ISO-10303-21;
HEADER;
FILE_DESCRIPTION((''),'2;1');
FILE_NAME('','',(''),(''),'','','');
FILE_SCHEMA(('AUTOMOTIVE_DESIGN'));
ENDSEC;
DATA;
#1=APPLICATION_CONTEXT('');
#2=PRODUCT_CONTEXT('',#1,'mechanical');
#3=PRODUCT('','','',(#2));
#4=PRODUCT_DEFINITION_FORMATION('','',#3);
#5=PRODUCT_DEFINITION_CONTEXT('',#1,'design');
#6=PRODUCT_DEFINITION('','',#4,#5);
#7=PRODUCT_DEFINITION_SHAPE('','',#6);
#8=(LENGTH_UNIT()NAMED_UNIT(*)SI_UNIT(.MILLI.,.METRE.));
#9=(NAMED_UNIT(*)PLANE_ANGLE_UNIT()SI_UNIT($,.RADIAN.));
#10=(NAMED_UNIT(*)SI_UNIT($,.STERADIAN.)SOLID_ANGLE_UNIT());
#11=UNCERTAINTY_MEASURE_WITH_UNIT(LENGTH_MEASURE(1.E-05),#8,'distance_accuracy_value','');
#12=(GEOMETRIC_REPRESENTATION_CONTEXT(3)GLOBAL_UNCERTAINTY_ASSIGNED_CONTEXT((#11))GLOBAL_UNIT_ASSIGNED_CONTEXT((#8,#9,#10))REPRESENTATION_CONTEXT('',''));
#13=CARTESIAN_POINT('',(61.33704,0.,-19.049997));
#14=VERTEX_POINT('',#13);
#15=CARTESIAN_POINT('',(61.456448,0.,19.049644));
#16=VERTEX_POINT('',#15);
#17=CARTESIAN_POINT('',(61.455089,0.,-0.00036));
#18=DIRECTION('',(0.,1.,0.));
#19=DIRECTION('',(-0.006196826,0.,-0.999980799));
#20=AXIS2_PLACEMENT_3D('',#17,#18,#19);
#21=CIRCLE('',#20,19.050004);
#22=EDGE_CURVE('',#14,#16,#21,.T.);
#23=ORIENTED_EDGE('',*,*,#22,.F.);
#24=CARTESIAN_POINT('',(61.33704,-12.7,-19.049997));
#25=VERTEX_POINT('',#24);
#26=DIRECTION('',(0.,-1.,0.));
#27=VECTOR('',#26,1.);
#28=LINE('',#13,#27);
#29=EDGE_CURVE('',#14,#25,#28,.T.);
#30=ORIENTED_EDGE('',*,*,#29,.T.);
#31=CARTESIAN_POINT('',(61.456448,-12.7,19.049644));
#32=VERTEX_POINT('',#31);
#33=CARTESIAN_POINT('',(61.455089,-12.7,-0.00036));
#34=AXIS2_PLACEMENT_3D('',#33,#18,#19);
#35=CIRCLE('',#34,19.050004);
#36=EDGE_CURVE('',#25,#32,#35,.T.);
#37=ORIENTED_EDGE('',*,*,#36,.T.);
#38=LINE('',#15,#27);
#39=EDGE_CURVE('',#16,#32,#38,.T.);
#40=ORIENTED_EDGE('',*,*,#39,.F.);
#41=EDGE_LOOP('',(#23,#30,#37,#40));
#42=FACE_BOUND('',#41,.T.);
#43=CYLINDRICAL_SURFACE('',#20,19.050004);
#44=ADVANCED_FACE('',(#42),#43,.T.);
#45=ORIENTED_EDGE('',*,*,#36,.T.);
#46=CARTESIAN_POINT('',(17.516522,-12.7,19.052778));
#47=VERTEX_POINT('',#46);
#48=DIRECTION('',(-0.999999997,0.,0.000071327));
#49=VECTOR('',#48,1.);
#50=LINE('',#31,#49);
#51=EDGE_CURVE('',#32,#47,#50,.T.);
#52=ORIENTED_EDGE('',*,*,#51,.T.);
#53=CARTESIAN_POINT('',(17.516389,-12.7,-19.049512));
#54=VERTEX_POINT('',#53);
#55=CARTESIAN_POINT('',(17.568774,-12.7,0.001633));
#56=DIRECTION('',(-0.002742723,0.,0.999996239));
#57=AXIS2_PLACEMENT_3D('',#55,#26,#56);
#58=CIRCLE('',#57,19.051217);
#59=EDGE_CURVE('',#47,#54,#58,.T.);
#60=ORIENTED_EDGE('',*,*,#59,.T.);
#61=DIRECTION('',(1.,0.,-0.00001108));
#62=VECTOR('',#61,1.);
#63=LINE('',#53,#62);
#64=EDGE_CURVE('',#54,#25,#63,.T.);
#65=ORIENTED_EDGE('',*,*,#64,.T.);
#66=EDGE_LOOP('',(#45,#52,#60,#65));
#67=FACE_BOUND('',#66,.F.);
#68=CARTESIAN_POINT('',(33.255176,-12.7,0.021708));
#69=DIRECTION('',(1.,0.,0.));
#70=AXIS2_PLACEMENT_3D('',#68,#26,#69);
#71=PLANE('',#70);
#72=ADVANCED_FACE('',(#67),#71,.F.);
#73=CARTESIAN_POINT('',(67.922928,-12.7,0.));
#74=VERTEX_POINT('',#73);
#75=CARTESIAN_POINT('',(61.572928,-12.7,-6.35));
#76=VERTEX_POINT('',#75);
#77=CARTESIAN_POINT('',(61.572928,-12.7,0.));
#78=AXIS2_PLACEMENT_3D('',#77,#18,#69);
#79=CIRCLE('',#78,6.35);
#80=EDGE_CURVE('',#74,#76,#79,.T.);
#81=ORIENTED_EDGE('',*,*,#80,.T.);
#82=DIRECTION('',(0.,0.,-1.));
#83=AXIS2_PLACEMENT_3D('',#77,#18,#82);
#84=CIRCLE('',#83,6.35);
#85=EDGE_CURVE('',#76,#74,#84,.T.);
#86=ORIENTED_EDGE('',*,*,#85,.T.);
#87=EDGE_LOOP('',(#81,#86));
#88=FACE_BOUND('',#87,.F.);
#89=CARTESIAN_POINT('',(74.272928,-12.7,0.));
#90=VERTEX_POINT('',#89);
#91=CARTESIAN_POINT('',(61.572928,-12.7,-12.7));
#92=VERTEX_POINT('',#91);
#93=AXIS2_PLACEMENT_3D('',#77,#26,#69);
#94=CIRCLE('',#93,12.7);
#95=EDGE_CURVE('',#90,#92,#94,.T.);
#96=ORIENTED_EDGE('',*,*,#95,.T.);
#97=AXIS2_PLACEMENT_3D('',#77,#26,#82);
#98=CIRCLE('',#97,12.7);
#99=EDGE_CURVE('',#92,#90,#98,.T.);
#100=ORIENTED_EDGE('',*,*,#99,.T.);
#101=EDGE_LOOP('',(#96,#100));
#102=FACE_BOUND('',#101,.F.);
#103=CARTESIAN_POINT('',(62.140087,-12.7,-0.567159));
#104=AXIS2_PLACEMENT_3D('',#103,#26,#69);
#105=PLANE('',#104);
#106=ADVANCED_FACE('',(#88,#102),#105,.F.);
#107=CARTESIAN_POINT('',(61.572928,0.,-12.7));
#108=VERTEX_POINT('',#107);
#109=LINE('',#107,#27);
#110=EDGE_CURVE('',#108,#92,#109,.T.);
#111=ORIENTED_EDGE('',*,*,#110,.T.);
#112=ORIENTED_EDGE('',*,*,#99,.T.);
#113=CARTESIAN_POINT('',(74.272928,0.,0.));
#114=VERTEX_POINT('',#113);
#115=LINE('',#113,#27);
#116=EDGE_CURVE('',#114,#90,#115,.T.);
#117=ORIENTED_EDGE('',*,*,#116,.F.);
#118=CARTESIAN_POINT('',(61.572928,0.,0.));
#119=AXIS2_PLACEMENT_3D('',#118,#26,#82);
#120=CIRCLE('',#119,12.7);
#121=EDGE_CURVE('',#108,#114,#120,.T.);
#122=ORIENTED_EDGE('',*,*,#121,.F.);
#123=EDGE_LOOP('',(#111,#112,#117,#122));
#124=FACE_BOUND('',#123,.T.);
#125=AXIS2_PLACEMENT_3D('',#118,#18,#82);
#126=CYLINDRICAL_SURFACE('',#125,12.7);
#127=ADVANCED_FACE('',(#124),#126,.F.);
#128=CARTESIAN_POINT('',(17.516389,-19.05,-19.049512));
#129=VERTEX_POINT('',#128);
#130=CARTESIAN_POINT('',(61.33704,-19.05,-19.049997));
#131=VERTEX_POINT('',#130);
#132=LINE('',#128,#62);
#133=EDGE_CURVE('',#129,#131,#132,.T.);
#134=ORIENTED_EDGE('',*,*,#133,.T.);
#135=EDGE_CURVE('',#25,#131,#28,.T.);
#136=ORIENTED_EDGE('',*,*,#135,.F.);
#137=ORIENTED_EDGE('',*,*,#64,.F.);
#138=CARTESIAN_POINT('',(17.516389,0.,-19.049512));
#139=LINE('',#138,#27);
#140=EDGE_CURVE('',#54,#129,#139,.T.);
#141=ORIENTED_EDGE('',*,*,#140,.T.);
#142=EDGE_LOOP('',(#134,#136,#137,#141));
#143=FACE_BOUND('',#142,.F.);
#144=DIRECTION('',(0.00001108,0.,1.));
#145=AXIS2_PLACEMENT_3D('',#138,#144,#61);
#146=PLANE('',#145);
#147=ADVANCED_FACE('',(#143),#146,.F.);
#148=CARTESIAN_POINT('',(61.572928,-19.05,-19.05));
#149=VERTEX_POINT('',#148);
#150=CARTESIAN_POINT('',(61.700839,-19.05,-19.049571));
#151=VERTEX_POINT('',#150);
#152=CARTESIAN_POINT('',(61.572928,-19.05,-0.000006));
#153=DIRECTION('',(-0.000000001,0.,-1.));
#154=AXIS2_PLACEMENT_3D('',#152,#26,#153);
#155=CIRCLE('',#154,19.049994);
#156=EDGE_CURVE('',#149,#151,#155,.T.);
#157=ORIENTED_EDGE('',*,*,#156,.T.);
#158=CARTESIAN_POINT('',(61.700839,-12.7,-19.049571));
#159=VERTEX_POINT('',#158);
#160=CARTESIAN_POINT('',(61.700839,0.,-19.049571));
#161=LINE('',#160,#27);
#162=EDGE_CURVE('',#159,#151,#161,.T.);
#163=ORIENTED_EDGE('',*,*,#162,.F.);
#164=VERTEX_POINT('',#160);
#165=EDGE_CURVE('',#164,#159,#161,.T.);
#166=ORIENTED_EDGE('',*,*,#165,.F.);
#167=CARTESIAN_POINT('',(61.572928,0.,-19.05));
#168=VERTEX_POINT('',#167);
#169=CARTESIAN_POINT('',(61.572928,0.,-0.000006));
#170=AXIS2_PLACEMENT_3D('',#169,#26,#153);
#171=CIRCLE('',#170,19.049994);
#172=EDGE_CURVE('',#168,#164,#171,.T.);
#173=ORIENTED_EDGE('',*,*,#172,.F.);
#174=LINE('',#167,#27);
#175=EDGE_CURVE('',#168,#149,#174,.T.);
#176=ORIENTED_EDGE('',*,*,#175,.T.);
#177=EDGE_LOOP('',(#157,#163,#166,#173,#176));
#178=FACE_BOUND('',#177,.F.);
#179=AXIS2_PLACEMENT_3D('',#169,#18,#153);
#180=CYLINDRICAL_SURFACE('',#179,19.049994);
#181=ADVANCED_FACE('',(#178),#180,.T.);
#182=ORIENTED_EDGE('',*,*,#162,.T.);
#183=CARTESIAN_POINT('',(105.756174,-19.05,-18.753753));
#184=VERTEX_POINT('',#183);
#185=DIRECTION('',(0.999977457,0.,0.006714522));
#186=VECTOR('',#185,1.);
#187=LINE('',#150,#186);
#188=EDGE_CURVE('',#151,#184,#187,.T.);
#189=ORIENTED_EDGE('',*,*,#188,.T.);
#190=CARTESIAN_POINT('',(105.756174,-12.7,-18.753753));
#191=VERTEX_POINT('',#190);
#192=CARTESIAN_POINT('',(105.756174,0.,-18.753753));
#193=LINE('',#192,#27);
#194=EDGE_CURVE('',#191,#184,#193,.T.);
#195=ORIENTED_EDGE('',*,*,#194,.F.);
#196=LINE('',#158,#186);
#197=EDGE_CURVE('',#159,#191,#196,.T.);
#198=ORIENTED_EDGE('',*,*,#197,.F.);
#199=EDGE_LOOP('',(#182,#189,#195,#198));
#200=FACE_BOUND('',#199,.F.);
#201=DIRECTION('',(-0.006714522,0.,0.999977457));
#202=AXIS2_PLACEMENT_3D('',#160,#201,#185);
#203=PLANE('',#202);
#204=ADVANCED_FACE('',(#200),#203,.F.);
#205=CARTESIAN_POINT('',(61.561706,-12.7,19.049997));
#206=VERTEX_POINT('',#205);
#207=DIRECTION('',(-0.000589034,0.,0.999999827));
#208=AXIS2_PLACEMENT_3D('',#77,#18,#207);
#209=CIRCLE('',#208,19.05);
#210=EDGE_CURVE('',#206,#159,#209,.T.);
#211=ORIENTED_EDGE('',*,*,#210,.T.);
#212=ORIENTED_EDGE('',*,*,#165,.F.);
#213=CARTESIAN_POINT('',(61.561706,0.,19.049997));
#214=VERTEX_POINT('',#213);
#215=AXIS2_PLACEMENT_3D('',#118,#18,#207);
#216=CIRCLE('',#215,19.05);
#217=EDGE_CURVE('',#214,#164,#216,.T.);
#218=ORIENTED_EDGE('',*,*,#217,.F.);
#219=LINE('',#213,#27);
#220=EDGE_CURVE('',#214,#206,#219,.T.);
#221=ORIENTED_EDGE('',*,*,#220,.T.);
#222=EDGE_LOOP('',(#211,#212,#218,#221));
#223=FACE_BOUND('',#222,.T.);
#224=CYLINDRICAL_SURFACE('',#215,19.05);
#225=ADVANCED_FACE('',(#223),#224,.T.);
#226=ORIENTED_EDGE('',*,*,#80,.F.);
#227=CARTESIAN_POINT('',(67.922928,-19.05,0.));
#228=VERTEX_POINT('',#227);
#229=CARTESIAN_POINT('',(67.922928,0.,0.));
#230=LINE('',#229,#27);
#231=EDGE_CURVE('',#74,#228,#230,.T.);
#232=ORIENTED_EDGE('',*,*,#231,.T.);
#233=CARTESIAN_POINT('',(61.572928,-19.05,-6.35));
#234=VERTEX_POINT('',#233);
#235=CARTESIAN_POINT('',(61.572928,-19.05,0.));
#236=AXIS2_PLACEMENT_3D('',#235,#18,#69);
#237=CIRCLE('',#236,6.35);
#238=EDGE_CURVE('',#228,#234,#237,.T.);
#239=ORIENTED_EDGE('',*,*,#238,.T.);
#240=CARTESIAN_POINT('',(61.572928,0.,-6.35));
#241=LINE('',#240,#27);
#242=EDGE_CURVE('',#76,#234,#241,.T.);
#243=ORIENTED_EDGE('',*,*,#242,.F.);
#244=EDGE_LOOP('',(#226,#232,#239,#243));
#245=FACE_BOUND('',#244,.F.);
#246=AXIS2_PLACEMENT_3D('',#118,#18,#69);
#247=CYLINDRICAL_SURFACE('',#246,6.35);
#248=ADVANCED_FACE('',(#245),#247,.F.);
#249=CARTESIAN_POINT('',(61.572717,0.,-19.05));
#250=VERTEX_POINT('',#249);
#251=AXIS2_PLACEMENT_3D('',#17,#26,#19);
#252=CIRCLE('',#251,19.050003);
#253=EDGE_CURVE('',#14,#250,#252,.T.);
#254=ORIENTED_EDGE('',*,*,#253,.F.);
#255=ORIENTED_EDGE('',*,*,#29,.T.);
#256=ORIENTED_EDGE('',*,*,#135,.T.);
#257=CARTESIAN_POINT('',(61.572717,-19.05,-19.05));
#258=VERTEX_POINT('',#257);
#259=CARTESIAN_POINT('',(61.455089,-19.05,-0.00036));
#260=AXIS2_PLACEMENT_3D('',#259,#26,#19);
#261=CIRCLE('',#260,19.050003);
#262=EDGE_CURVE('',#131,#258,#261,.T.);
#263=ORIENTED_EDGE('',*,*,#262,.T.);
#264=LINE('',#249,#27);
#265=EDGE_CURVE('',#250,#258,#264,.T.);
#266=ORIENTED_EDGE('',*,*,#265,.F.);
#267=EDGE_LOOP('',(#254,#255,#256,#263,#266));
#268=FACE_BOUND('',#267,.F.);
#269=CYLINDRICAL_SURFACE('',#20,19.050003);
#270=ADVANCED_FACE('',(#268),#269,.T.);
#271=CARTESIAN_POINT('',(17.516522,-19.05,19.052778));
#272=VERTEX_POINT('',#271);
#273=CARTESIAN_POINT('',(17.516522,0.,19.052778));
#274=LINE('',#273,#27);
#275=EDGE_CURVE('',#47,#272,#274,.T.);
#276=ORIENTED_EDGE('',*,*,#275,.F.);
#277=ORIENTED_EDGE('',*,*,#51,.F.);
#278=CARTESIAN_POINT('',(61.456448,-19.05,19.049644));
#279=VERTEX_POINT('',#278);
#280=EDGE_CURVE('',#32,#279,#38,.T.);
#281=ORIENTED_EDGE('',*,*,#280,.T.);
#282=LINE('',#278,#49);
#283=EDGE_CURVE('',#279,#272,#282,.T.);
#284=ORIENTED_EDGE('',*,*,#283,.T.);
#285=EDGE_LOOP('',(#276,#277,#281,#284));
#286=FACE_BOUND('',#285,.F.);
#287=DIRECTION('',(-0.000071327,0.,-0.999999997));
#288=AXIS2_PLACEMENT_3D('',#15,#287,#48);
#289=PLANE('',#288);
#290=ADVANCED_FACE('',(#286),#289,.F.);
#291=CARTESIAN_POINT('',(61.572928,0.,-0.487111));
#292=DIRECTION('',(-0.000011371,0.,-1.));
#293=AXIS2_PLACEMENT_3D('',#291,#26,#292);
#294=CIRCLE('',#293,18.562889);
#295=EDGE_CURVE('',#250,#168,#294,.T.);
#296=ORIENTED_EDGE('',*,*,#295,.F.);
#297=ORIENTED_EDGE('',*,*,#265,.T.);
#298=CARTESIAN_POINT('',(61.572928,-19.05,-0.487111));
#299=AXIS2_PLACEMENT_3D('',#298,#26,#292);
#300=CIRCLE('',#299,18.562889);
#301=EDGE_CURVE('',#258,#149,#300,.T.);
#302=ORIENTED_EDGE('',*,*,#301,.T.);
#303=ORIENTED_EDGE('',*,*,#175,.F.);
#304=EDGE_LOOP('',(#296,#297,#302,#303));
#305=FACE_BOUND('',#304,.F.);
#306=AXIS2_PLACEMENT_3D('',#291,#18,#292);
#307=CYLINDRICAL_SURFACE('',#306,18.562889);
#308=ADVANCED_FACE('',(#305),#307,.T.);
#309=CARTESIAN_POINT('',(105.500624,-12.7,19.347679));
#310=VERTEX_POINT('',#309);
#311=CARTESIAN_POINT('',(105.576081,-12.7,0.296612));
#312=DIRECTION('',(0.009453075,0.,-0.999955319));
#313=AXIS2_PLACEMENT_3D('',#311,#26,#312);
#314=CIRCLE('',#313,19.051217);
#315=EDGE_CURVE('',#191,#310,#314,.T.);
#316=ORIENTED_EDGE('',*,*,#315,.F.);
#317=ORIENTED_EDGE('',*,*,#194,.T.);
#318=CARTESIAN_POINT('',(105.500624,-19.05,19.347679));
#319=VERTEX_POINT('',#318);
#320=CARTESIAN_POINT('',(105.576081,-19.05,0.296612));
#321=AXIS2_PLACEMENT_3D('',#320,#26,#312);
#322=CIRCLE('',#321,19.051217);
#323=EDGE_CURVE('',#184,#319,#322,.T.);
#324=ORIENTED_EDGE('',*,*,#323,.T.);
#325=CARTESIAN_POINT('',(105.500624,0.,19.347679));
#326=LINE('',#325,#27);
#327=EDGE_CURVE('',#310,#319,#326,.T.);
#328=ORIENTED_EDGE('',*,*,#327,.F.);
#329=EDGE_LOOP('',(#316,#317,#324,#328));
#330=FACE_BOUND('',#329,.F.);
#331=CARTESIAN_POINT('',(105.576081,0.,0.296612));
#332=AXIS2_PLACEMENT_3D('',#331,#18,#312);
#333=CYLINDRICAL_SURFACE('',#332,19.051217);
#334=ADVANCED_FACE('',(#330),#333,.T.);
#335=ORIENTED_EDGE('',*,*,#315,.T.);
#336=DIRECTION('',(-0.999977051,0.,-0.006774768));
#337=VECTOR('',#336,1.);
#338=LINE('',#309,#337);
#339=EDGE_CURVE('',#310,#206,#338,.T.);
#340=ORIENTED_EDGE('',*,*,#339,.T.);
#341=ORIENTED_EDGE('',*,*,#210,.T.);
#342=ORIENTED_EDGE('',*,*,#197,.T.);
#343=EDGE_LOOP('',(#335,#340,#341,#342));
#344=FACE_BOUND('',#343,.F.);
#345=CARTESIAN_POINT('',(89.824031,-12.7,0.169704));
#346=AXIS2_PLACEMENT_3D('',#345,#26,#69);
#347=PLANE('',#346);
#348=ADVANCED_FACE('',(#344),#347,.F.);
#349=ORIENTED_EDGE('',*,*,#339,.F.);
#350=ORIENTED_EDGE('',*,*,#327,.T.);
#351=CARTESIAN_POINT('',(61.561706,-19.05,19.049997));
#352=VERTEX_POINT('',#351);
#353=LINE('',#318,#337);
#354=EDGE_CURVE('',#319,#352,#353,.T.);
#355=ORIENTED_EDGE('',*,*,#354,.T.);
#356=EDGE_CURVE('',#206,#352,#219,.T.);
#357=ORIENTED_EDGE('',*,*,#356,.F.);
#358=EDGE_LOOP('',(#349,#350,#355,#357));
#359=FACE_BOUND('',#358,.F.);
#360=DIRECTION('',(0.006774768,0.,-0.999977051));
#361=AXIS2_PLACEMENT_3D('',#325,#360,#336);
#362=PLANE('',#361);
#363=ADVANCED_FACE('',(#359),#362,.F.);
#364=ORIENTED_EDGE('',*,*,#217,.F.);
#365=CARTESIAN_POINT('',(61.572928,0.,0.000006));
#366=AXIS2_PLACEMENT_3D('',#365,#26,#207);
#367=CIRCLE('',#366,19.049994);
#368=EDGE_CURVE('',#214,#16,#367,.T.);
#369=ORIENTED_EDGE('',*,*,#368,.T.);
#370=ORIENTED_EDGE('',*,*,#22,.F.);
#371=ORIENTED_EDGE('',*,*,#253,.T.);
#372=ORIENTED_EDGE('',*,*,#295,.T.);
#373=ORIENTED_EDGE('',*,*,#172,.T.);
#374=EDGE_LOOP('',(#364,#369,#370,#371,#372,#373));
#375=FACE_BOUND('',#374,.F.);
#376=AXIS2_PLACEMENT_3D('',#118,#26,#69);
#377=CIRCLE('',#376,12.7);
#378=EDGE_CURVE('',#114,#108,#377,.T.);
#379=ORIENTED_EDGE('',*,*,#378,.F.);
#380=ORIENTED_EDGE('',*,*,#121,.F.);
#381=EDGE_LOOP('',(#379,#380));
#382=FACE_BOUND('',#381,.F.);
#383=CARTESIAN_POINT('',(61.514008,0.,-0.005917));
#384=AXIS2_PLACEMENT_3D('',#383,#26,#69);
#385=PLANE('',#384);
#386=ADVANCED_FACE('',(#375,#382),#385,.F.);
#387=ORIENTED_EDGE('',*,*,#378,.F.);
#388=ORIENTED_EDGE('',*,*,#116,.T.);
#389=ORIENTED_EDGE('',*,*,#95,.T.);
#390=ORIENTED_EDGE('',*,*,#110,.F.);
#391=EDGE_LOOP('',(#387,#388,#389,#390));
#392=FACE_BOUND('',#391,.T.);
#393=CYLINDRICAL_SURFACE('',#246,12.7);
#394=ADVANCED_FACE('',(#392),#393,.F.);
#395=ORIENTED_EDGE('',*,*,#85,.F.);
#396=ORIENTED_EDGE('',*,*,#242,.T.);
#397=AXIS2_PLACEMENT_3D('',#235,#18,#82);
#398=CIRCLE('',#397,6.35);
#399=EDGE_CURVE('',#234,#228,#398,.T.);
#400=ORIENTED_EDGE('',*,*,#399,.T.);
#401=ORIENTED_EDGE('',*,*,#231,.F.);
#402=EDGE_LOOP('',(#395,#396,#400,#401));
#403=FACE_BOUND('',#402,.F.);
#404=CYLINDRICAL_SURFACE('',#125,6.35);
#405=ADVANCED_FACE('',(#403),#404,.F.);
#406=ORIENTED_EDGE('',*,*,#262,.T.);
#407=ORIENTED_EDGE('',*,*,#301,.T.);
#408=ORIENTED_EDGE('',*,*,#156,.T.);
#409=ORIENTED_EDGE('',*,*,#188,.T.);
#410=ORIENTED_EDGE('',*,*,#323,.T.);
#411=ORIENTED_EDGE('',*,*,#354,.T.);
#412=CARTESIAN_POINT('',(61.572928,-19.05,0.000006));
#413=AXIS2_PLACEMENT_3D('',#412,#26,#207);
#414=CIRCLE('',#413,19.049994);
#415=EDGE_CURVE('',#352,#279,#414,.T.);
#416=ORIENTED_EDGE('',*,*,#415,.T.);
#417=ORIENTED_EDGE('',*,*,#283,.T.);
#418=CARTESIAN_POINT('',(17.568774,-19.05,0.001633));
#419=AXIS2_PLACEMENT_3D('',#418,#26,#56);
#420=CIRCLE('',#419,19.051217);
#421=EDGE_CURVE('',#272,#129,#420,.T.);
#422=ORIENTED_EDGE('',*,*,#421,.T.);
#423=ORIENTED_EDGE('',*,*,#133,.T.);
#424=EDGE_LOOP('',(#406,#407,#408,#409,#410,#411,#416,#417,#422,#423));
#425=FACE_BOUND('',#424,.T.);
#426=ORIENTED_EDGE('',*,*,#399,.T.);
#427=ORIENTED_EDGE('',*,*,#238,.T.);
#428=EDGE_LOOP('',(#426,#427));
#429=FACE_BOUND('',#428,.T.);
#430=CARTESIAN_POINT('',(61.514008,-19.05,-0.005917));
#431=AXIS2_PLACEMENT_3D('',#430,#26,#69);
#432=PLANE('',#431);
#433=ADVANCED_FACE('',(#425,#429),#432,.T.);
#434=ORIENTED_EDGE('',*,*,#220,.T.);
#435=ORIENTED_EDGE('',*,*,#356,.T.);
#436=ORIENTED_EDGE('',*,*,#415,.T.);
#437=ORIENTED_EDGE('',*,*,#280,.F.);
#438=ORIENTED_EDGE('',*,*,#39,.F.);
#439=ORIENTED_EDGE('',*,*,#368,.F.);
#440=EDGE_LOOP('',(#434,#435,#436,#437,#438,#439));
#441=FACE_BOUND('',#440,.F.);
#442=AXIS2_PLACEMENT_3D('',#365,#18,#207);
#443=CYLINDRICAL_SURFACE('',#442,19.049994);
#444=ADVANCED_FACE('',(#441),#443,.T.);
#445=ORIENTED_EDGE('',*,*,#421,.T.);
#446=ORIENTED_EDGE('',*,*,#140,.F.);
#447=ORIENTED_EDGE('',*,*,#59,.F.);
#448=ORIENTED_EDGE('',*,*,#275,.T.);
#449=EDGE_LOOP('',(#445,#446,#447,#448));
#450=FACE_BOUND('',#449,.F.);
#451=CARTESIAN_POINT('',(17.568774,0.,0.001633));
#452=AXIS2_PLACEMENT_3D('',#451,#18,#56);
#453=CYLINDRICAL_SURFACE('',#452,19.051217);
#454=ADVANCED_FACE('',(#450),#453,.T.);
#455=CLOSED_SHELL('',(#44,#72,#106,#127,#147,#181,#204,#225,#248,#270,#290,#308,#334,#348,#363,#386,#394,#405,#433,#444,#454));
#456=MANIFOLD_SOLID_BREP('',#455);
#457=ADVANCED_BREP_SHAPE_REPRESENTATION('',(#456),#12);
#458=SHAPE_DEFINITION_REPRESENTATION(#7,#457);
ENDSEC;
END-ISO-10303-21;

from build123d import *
from build123d import SkipClean  # not in build123d's __all__

# Parameters (mm, degrees)
F1_DEPTH = 19.05
F2_DEPTH = 12.7
F3_DEPTH = 12.7


with BuildPart() as f1:
    # F0 (on Front) → F1 (new body)
    with BuildSketch(Plane.XZ):
        with BuildLine():
            ThreePointArc((61.5727165116, -19.0499999988), (61.5728220467, -19.0499999997), (61.5729275818, -19.05))
            ThreePointArc((61.5729275818, -19.05), (61.6368837688, -19.0498926403), (61.7008392349, -19.0495705623))
            ThreePointArc((61.7008392349, -19.0495705623), (80.6228005597, 0.0695667009), (61.5617064856, 19.0499966952))
            ThreePointArc((61.5617064856, 19.0499966952), (61.5090769294, 19.0498929943), (61.4564478606, 19.0496438936))
            ThreePointArc((61.4564478606, 19.0496438936), (42.4051790983, 0.0593448366), (61.3370395323, -19.0499973876))
            Line((61.3370395323, -19.0499973876), (61.5727165116, -19.0499999988))
        make_face()
        with BuildLine():
            ThreePointArc((61.5729275818, -12.7), (52.5926714608, 8.9802561211), (74.2729275818, 0))
            ThreePointArc((74.2729275818, 0), (70.5531837029, -8.9802561211), (61.5729275818, -12.7))
        make_face(mode=Mode.SUBTRACT)
        with BuildLine():
            ThreePointArc((61.3370395323, -19.0499973876), (61.4548780179, -19.0503631562), (61.5727165116, -19.0499999988))
            Line((61.5727165116, -19.0499999988), (61.3370395323, -19.0499973876))
        make_face()
        with BuildLine():
            ThreePointArc((61.5617064856, 19.0499966952), (80.6228005597, 0.0695667009), (61.7008392349, -19.0495705623))
            Line((61.7008392349, -19.0495705623), (105.7561740171, -18.7537533585))
            ThreePointArc((105.7561740171, -18.7537533585), (124.6268697008, 0.4243875569), (105.5006242064, 19.3476794968))
            Line((105.5006242064, 19.3476794968), (61.5617064856, 19.0499966952))
        make_face()
        with BuildLine():
            Line((17.5163885853, -19.0495118633), (61.3370395323, -19.0499973876))
            ThreePointArc((61.3370395323, -19.0499973876), (42.4051790983, 0.0593448366), (61.4564478606, 19.0496438936))
            Line((61.4564478606, 19.0496438936), (17.516521874, 19.0527779802))
            ThreePointArc((17.516521874, 19.0527779802), (-1.4824426783, 0.0016995201), (17.5163885853, -19.0495118633))
        make_face()
        with BuildLine():
            ThreePointArc((61.5729275818, -12.7), (70.5531837029, -8.9802561211), (74.2729275818, 0))
            ThreePointArc((74.2729275818, 0), (52.5926714608, 8.9802561211), (61.5729275818, -12.7))
        make_face()
        with BuildLine():
            ThreePointArc((67.9229275818, 0), (66.0630556424, -4.4901280605), (61.5729275818, -6.35))
            ThreePointArc((61.5729275818, -6.35), (57.0827995213, 4.4901280605), (67.9229275818, 0))
        make_face(mode=Mode.SUBTRACT)
    extrude(amount=F1_DEPTH)

    # F0 (on Front) → F2 (cut)
    with BuildSketch(Plane.XZ):
        with BuildLine():
            ThreePointArc((61.5729275818, -12.7), (70.5531837029, -8.9802561211), (74.2729275818, 0))
            ThreePointArc((74.2729275818, 0), (52.5926714608, 8.9802561211), (61.5729275818, -12.7))
        make_face()
        with BuildLine():
            ThreePointArc((67.9229275818, 0), (66.0630556424, -4.4901280605), (61.5729275818, -6.35))
            ThreePointArc((61.5729275818, -6.35), (57.0827995213, 4.4901280605), (67.9229275818, 0))
        make_face(mode=Mode.SUBTRACT)
        with BuildLine():
            Line((17.5163885853, -19.0495118633), (61.3370395323, -19.0499973876))
            ThreePointArc((61.3370395323, -19.0499973876), (42.4051790983, 0.0593448366), (61.4564478606, 19.0496438936))
            Line((61.4564478606, 19.0496438936), (17.516521874, 19.0527779802))
            ThreePointArc((17.516521874, 19.0527779802), (-1.4824426783, 0.0016995201), (17.5163885853, -19.0495118633))
        make_face()
    extrude(amount=F2_DEPTH, mode=Mode.SUBTRACT)

    # F0 (on Front) → F3 (cut)
    with BuildSketch(Plane.XZ):
        with BuildLine():
            ThreePointArc((61.5617064856, 19.0499966952), (80.6228005597, 0.0695667009), (61.7008392349, -19.0495705623))
            Line((61.7008392349, -19.0495705623), (105.7561740171, -18.7537533585))
            ThreePointArc((105.7561740171, -18.7537533585), (124.6268697008, 0.4243875569), (105.5006242064, 19.3476794968))
            Line((105.5006242064, 19.3476794968), (61.5617064856, 19.0499966952))
        make_face()
    with SkipClean():  # cleaning this boolean's faces spoils the solid; the shape is the same uncleaned
        extrude(amount=F3_DEPTH, mode=Mode.SUBTRACT)


solid = f1.part
